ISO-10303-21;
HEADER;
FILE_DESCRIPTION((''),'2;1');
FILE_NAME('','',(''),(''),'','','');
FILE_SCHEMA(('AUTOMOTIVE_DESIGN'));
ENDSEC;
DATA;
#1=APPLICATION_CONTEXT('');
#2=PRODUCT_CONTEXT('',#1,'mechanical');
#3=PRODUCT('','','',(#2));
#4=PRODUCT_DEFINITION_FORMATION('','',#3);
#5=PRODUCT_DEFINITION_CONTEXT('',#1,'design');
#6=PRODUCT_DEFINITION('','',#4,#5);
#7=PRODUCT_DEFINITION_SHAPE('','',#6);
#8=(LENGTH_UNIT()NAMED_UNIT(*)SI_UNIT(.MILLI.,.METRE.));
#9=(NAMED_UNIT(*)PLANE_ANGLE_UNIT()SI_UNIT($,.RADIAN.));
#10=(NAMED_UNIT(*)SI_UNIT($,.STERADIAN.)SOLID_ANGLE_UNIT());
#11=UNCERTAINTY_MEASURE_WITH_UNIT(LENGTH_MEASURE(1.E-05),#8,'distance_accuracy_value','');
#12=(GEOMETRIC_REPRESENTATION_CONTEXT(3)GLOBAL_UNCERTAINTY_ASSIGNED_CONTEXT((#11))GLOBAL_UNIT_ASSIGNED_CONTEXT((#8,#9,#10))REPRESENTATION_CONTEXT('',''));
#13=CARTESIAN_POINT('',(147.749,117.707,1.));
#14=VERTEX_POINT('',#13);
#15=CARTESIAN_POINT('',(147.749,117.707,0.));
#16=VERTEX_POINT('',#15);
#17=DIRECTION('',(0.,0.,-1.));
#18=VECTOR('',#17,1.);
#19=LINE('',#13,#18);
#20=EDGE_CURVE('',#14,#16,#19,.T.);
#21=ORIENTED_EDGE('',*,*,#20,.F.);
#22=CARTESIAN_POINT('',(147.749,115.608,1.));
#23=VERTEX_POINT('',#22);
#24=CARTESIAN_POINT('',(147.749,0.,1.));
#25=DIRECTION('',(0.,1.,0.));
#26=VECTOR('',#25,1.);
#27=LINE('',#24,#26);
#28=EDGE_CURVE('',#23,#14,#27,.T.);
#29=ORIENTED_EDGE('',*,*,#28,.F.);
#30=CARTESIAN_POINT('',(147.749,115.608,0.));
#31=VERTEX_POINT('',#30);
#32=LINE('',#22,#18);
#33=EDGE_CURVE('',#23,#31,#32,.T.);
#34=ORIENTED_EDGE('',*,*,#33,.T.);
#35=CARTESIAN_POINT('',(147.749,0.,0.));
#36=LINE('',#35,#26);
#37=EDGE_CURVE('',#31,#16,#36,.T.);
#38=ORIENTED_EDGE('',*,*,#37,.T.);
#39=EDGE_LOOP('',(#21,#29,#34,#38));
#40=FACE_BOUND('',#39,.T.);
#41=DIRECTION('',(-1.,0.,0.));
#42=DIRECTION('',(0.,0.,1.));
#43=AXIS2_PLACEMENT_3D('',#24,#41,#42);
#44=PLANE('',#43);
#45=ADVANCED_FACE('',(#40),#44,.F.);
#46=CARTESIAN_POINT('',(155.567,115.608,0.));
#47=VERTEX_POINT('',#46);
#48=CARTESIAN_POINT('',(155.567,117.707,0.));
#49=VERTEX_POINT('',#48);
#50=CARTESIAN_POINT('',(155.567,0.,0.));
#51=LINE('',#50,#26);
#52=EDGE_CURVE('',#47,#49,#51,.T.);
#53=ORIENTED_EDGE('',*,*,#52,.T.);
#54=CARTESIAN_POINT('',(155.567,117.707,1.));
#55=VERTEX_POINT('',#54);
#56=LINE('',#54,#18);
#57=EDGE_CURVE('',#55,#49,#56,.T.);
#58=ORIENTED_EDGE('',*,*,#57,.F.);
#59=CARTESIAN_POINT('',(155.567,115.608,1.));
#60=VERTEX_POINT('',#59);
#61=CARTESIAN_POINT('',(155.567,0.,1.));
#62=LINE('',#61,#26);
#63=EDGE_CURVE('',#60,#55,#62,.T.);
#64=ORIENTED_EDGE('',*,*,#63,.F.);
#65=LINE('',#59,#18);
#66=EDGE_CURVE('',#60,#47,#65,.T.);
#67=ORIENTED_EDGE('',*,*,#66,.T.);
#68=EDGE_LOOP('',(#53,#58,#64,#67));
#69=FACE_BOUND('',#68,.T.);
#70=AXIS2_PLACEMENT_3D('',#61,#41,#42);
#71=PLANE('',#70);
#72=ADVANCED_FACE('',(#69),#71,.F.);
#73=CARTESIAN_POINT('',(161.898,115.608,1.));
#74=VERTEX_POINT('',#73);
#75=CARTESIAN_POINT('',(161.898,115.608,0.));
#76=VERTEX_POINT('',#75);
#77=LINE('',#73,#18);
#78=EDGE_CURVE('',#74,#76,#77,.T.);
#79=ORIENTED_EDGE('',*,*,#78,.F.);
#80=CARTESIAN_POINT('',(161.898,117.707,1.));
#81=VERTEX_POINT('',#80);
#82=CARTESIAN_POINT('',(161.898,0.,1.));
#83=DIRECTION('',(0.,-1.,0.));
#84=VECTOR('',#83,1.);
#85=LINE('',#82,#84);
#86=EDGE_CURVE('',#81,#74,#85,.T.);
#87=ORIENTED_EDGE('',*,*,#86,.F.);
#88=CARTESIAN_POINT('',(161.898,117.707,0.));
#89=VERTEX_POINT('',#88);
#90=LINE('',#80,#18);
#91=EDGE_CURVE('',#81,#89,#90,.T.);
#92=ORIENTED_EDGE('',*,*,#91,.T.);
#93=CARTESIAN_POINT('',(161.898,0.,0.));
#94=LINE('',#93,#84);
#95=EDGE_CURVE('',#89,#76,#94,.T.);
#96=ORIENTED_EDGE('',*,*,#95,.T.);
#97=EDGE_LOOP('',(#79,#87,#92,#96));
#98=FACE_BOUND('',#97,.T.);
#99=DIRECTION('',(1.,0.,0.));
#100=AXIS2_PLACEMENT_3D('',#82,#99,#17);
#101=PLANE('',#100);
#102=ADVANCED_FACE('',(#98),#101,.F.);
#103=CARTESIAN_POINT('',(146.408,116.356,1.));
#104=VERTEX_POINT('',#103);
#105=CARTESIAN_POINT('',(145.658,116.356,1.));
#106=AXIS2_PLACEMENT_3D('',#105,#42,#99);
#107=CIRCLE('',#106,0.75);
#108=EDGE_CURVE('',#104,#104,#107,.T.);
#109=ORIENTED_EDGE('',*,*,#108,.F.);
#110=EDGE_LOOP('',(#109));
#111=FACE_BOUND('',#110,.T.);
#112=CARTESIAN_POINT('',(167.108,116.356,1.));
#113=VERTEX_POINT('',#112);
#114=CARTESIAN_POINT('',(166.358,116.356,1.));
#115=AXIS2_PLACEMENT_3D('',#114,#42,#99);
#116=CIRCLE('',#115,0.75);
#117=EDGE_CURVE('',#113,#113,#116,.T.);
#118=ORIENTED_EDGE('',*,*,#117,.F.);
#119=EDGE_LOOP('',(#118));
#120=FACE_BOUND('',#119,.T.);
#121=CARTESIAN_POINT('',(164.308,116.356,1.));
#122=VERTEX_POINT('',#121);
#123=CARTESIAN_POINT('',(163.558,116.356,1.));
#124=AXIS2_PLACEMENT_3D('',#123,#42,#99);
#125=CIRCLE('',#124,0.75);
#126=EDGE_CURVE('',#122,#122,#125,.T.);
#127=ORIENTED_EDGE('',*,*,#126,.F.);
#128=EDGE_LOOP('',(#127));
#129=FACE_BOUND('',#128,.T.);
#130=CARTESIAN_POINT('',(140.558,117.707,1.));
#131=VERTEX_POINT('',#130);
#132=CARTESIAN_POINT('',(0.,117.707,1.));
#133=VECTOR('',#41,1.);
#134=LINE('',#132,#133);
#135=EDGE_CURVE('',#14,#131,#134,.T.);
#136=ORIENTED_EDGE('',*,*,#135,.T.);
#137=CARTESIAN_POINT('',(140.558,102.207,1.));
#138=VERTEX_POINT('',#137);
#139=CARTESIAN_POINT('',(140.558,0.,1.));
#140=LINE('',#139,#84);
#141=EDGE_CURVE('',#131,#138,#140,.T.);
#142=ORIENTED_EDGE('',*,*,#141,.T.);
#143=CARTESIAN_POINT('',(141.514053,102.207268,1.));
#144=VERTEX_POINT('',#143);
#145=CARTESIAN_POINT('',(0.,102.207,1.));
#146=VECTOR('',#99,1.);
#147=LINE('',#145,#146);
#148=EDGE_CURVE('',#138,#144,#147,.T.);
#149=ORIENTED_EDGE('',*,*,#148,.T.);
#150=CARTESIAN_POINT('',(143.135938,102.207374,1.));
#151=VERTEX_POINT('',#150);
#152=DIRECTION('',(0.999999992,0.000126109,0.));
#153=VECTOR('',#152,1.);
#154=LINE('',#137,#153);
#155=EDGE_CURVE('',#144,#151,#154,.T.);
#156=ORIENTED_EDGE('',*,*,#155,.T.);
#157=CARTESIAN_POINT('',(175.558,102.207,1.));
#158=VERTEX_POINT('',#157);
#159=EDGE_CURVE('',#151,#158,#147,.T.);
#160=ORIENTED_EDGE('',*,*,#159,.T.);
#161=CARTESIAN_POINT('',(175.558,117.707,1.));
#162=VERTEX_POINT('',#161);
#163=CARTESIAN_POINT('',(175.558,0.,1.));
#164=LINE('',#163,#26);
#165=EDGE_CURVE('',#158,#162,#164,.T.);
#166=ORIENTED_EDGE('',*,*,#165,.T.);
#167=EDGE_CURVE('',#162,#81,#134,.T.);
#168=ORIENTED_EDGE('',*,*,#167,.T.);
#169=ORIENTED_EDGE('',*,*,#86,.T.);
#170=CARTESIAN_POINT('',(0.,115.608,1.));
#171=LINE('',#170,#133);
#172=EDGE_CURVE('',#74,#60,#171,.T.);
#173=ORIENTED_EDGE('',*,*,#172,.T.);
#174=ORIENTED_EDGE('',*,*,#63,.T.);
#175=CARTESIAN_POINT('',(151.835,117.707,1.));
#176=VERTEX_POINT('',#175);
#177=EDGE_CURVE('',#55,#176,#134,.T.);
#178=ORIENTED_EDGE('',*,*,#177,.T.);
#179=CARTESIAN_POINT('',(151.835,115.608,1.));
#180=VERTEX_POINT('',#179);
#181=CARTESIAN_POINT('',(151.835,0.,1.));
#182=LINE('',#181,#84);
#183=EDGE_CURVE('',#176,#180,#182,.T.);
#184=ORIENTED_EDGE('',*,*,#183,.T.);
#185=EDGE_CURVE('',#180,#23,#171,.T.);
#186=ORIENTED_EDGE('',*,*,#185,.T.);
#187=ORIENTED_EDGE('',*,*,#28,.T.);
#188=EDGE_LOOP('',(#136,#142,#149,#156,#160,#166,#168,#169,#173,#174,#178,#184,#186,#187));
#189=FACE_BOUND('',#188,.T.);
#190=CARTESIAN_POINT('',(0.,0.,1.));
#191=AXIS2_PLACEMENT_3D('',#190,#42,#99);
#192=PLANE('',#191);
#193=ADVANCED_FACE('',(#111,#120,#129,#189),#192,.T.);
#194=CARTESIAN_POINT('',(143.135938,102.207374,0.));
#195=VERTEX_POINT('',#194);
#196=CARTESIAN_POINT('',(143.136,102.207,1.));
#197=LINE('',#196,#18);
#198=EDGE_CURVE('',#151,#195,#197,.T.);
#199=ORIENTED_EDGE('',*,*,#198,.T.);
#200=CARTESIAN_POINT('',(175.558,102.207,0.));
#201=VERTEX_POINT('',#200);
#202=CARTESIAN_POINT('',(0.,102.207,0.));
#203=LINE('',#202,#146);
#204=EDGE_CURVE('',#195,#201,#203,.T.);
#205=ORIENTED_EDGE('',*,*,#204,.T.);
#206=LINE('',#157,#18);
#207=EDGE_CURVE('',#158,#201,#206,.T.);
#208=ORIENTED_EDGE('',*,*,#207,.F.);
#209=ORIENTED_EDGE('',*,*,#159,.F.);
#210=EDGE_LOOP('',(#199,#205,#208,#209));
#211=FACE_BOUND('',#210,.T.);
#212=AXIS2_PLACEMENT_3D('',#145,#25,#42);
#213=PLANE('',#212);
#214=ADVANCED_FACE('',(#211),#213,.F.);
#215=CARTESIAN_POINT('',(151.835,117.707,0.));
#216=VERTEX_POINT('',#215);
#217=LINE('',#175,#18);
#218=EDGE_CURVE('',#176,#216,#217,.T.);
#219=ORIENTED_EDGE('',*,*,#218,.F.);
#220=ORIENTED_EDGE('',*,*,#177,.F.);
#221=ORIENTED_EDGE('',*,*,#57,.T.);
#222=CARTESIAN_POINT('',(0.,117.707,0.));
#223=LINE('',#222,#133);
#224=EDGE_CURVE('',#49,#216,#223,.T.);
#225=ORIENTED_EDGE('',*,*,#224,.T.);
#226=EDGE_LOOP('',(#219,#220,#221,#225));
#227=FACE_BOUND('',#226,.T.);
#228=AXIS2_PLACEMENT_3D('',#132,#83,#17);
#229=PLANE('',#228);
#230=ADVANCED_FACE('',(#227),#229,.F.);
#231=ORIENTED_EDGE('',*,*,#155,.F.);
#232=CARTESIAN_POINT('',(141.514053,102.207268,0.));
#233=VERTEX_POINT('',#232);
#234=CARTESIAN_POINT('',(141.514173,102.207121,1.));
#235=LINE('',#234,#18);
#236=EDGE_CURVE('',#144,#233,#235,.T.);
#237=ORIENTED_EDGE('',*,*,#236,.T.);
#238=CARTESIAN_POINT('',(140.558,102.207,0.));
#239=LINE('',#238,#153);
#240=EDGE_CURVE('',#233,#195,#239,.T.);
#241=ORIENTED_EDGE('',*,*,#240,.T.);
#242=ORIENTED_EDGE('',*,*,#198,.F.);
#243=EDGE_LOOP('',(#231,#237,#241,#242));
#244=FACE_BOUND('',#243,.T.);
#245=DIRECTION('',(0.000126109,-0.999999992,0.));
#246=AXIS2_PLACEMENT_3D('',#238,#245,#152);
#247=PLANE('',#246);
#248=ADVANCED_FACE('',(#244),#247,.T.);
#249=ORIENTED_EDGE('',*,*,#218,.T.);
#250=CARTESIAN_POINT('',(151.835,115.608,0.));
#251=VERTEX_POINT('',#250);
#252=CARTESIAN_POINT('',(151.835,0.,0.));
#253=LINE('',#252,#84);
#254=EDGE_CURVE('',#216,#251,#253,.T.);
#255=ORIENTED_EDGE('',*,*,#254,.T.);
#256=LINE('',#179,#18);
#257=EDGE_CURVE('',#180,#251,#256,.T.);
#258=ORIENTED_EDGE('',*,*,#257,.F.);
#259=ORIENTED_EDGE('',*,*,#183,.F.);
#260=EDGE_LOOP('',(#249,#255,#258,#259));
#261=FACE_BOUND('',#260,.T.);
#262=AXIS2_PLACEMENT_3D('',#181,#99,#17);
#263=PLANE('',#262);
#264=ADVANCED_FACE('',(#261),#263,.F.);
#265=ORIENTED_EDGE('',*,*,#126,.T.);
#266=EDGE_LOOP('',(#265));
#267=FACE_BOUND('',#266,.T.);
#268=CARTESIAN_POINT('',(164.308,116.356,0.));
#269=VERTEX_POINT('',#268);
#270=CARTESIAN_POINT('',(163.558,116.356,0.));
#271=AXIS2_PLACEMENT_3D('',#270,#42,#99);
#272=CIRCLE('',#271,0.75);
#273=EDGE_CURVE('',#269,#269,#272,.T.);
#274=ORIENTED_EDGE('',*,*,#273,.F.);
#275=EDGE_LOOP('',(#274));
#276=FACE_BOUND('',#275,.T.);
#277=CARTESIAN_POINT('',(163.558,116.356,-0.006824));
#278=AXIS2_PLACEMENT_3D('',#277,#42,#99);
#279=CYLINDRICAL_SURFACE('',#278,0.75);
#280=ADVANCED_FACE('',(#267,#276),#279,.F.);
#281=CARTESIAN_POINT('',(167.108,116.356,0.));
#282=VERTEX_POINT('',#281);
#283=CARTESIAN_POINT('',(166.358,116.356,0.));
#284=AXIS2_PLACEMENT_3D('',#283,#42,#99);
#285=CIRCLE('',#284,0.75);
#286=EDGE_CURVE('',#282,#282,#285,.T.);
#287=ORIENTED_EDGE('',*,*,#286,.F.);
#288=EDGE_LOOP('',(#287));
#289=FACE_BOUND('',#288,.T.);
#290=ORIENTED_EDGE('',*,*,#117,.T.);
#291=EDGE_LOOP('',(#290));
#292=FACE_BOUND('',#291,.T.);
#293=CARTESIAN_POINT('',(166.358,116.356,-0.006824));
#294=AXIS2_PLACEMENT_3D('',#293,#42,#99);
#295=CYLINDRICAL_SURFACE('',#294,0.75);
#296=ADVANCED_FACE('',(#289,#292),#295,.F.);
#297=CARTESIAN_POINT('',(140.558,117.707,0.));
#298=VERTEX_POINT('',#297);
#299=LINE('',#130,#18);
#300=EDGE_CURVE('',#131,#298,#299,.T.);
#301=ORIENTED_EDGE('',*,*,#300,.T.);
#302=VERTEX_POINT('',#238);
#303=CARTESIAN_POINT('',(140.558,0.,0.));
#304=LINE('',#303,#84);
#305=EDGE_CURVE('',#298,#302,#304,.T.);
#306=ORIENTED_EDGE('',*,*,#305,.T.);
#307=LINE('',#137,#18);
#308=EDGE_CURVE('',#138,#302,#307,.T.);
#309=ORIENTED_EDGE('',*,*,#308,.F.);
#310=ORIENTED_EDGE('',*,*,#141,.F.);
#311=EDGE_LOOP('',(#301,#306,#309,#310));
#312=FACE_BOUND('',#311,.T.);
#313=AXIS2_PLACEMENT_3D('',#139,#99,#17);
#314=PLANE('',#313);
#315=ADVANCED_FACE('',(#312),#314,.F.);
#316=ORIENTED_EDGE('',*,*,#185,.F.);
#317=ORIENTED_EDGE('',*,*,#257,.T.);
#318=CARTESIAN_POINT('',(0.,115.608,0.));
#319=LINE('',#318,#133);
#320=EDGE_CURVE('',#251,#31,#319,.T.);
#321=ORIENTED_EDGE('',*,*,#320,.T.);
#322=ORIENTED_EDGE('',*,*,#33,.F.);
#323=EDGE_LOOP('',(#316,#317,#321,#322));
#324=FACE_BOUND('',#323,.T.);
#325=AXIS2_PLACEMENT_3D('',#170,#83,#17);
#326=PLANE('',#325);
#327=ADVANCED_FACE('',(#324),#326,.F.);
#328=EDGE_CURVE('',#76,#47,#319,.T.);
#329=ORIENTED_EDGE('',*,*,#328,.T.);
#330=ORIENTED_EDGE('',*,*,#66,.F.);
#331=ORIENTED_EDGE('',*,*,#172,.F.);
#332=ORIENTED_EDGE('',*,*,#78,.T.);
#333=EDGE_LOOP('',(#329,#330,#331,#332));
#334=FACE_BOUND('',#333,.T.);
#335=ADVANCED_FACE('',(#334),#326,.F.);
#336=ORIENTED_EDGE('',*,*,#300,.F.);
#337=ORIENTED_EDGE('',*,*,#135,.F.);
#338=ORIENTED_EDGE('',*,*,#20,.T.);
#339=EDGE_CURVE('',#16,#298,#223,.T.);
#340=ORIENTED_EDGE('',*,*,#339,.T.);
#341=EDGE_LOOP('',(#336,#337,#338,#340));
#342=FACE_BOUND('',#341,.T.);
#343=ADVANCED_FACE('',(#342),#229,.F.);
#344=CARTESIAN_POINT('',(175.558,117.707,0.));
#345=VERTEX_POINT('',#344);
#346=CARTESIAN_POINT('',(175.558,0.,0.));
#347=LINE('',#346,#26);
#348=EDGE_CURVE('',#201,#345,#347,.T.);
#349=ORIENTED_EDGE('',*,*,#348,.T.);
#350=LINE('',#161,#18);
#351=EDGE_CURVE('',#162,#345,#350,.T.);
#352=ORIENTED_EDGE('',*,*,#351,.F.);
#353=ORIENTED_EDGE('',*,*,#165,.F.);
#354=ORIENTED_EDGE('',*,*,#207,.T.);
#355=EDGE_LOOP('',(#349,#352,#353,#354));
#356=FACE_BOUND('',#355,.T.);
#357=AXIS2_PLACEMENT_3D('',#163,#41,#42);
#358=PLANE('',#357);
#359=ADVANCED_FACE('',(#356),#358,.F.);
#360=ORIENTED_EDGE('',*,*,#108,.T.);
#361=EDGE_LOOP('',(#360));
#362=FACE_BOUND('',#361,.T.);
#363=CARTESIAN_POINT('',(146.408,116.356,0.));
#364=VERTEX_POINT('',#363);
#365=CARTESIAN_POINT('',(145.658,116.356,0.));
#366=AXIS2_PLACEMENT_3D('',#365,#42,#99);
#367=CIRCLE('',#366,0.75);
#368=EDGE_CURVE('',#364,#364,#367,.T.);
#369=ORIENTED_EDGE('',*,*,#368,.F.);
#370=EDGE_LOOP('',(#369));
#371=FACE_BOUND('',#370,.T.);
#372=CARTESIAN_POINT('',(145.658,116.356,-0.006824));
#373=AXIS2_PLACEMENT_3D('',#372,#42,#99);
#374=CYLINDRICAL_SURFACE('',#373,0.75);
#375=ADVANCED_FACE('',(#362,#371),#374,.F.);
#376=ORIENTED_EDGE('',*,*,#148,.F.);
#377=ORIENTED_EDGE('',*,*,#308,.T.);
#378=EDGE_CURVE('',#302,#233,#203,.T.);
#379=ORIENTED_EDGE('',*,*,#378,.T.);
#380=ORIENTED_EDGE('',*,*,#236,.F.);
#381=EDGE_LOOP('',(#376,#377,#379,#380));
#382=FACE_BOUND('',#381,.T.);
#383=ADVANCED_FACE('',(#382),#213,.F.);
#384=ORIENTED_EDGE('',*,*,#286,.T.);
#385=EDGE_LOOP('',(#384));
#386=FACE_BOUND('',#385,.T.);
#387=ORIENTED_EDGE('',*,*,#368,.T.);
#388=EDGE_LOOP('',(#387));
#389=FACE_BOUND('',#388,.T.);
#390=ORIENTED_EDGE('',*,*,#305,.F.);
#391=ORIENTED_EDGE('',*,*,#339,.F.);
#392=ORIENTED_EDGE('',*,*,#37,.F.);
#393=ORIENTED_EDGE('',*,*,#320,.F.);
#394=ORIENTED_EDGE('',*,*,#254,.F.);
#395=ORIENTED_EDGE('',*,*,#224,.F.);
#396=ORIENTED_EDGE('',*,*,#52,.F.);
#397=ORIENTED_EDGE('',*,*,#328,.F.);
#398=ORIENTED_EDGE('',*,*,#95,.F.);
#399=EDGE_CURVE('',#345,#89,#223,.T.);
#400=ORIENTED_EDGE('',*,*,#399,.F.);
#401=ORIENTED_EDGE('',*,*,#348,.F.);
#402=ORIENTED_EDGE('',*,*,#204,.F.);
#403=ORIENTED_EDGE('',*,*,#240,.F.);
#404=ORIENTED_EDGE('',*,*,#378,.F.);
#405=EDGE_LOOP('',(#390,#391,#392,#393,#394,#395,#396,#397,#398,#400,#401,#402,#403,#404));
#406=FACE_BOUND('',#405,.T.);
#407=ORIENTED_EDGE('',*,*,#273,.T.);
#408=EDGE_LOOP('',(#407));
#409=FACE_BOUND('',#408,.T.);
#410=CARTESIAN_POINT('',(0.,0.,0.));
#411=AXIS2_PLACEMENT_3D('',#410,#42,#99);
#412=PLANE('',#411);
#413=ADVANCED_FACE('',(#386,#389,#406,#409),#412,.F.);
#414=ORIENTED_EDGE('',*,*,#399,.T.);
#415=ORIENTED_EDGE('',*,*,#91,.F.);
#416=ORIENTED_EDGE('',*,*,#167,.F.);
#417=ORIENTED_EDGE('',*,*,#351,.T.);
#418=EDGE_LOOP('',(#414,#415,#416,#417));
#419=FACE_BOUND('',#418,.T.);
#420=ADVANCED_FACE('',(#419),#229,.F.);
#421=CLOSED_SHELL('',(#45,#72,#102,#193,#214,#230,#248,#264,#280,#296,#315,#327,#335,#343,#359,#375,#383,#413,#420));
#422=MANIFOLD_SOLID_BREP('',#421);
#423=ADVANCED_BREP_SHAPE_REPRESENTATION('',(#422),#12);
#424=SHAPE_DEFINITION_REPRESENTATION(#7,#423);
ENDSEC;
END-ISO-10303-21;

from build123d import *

# Parameters (mm, degrees)
BOSS_EXTRUDE3_DEPTH     = 1
CUT_EXTRUDE1_DEPTH      = 212.368278774
CUT_EXTRUDE1_DEPTH_BACK = 212.368278774
SKETCH3_R               = 0.75


with BuildPart() as part:
    # Boss-Extrude1: read off the stored shape, not the designer's step
    # Boss-Extrude1: loft between two sections, ruled curve by curve
    boss_extrude1_from = [
        Edge.make_line((175.558, 102.207, 0), (175.558, 117.707, 0)),
        Edge.make_line((175.558, 117.707, 0), (161.898, 117.707, 0)),
        Edge.make_line((161.898, 117.707, 0), (161.898, 115.608, 0)),
        Edge.make_line((161.898, 115.608, 0), (155.567, 115.608, 0)),
        Edge.make_line((155.567, 115.608, 0), (155.567, 117.707, 0)),
        Edge.make_line((155.567, 117.707, 0), (151.835, 117.707, 0)),
        Edge.make_line((151.835, 117.707, 0), (151.835, 115.608, 0)),
        Edge.make_line((151.835, 115.608, 0), (147.749, 115.608, 0)),
        Edge.make_line((147.749, 115.608, 0), (147.749, 117.707, 0)),
        Edge.make_line((147.749, 117.707, 0), (140.558, 117.707, 0)),
        Edge.make_line((140.558, 117.707, 0), (140.558, 102.207, 0)),
        Edge.make_line((140.558, 102.207, 0), (141.514, 102.2075, 0)),
        Edge.make_line((141.514, 102.2075, 0), (141.504, 102.212, 0)),
        Edge.make_line((141.504, 102.212, 0), (141.5, 102.222, 0)),
        Edge.make_line((141.5, 102.222, 0), (141.5, 106.293, 0)),
        Edge.make_line((141.5, 106.293, 0), (141.504, 106.303, 0)),
        Edge.make_line((141.504, 106.303, 0), (141.514, 106.307, 0)),
        Edge.make_line((141.514, 106.307, 0), (143.136, 106.307, 0)),
        Edge.make_line((143.136, 106.307, 0), (143.146, 106.303, 0)),
        Edge.make_line((143.146, 106.303, 0), (143.15, 106.293, 0)),
        Edge.make_line((143.15, 106.293, 0), (143.15, 102.222, 0)),
        Edge.make_line((143.15, 102.222, 0), (143.146, 102.212, 0)),
        Edge.make_line((143.146, 102.212, 0), (143.136, 102.2075, 0)),
        Edge.make_line((143.136, 102.2075, 0), (175.558, 102.207, 0)),
    ]
    boss_extrude1_to = [
        Edge.make_line((175.558, 102.207, 1), (175.558, 117.707, 1)),
        Edge.make_line((175.558, 117.707, 1), (161.898, 117.707, 1)),
        Edge.make_line((161.898, 117.707, 1), (161.898, 115.608, 1)),
        Edge.make_line((161.898, 115.608, 1), (155.567, 115.608, 1)),
        Edge.make_line((155.567, 115.608, 1), (155.567, 117.707, 1)),
        Edge.make_line((155.567, 117.707, 1), (151.835, 117.707, 1)),
        Edge.make_line((151.835, 117.707, 1), (151.835, 115.608, 1)),
        Edge.make_line((151.835, 115.608, 1), (147.749, 115.608, 1)),
        Edge.make_line((147.749, 115.608, 1), (147.749, 117.707, 1)),
        Edge.make_line((147.749, 117.707, 1), (140.558, 117.707, 1)),
        Edge.make_line((140.558, 117.707, 1), (140.558, 102.207, 1)),
        Edge.make_line((140.558, 102.207, 1), (141.514, 102.2075, 1)),
        Edge.make_line((141.514, 102.2075, 1), (141.504, 102.212, 1)),
        Edge.make_line((141.504, 102.212, 1), (141.5, 102.222, 1)),
        Edge.make_line((141.5, 102.222, 1), (141.5, 106.293, 1)),
        Edge.make_line((141.5, 106.293, 1), (141.504, 106.303, 1)),
        Edge.make_line((141.504, 106.303, 1), (141.514, 106.307, 1)),
        Edge.make_line((141.514, 106.307, 1), (143.136, 106.307, 1)),
        Edge.make_line((143.136, 106.307, 1), (143.146, 106.303, 1)),
        Edge.make_line((143.146, 106.303, 1), (143.15, 106.293, 1)),
        Edge.make_line((143.15, 106.293, 1), (143.15, 102.222, 1)),
        Edge.make_line((143.15, 102.222, 1), (143.146, 102.212, 1)),
        Edge.make_line((143.146, 102.212, 1), (143.136, 102.2075, 1)),
        Edge.make_line((143.136, 102.2075, 1), (175.558, 102.207, 1)),
    ]
    boss_extrude1 = Solid(Shell([*[Face.make_surface_from_curves(boss_extrude1_from[k], boss_extrude1_to[k]) for k in range(24)], Face(Wire(boss_extrude1_from)), Face(Wire(boss_extrude1_to))]))
    add(boss_extrude1)

    # Sketch2 → Boss-Extrude3 (add)
    with BuildSketch(Plane.XY.offset(1)):
        Polygon((140.906858982, 106.861348972), (140.558, 102.207), (144.371699547, 102.207480944), (144.371699547, 106.861348972), align=None)
    extrude(amount=-BOSS_EXTRUDE3_DEPTH)

    # Sketch3 → Cut-Extrude1 (cut, two sides: drawn at the far end of the back side and taken through both)
    with BuildSketch(Plane.XY.offset(1).offset(-CUT_EXTRUDE1_DEPTH_BACK)):
        with Locations((145.658, 116.356)):
            Circle(SKETCH3_R)
        with Locations((163.558, 116.356)):
            Circle(SKETCH3_R)
        with Locations((166.358, 116.356)):
            Circle(SKETCH3_R)
    extrude(amount=CUT_EXTRUDE1_DEPTH + CUT_EXTRUDE1_DEPTH_BACK, mode=Mode.SUBTRACT)


solid = part.part
